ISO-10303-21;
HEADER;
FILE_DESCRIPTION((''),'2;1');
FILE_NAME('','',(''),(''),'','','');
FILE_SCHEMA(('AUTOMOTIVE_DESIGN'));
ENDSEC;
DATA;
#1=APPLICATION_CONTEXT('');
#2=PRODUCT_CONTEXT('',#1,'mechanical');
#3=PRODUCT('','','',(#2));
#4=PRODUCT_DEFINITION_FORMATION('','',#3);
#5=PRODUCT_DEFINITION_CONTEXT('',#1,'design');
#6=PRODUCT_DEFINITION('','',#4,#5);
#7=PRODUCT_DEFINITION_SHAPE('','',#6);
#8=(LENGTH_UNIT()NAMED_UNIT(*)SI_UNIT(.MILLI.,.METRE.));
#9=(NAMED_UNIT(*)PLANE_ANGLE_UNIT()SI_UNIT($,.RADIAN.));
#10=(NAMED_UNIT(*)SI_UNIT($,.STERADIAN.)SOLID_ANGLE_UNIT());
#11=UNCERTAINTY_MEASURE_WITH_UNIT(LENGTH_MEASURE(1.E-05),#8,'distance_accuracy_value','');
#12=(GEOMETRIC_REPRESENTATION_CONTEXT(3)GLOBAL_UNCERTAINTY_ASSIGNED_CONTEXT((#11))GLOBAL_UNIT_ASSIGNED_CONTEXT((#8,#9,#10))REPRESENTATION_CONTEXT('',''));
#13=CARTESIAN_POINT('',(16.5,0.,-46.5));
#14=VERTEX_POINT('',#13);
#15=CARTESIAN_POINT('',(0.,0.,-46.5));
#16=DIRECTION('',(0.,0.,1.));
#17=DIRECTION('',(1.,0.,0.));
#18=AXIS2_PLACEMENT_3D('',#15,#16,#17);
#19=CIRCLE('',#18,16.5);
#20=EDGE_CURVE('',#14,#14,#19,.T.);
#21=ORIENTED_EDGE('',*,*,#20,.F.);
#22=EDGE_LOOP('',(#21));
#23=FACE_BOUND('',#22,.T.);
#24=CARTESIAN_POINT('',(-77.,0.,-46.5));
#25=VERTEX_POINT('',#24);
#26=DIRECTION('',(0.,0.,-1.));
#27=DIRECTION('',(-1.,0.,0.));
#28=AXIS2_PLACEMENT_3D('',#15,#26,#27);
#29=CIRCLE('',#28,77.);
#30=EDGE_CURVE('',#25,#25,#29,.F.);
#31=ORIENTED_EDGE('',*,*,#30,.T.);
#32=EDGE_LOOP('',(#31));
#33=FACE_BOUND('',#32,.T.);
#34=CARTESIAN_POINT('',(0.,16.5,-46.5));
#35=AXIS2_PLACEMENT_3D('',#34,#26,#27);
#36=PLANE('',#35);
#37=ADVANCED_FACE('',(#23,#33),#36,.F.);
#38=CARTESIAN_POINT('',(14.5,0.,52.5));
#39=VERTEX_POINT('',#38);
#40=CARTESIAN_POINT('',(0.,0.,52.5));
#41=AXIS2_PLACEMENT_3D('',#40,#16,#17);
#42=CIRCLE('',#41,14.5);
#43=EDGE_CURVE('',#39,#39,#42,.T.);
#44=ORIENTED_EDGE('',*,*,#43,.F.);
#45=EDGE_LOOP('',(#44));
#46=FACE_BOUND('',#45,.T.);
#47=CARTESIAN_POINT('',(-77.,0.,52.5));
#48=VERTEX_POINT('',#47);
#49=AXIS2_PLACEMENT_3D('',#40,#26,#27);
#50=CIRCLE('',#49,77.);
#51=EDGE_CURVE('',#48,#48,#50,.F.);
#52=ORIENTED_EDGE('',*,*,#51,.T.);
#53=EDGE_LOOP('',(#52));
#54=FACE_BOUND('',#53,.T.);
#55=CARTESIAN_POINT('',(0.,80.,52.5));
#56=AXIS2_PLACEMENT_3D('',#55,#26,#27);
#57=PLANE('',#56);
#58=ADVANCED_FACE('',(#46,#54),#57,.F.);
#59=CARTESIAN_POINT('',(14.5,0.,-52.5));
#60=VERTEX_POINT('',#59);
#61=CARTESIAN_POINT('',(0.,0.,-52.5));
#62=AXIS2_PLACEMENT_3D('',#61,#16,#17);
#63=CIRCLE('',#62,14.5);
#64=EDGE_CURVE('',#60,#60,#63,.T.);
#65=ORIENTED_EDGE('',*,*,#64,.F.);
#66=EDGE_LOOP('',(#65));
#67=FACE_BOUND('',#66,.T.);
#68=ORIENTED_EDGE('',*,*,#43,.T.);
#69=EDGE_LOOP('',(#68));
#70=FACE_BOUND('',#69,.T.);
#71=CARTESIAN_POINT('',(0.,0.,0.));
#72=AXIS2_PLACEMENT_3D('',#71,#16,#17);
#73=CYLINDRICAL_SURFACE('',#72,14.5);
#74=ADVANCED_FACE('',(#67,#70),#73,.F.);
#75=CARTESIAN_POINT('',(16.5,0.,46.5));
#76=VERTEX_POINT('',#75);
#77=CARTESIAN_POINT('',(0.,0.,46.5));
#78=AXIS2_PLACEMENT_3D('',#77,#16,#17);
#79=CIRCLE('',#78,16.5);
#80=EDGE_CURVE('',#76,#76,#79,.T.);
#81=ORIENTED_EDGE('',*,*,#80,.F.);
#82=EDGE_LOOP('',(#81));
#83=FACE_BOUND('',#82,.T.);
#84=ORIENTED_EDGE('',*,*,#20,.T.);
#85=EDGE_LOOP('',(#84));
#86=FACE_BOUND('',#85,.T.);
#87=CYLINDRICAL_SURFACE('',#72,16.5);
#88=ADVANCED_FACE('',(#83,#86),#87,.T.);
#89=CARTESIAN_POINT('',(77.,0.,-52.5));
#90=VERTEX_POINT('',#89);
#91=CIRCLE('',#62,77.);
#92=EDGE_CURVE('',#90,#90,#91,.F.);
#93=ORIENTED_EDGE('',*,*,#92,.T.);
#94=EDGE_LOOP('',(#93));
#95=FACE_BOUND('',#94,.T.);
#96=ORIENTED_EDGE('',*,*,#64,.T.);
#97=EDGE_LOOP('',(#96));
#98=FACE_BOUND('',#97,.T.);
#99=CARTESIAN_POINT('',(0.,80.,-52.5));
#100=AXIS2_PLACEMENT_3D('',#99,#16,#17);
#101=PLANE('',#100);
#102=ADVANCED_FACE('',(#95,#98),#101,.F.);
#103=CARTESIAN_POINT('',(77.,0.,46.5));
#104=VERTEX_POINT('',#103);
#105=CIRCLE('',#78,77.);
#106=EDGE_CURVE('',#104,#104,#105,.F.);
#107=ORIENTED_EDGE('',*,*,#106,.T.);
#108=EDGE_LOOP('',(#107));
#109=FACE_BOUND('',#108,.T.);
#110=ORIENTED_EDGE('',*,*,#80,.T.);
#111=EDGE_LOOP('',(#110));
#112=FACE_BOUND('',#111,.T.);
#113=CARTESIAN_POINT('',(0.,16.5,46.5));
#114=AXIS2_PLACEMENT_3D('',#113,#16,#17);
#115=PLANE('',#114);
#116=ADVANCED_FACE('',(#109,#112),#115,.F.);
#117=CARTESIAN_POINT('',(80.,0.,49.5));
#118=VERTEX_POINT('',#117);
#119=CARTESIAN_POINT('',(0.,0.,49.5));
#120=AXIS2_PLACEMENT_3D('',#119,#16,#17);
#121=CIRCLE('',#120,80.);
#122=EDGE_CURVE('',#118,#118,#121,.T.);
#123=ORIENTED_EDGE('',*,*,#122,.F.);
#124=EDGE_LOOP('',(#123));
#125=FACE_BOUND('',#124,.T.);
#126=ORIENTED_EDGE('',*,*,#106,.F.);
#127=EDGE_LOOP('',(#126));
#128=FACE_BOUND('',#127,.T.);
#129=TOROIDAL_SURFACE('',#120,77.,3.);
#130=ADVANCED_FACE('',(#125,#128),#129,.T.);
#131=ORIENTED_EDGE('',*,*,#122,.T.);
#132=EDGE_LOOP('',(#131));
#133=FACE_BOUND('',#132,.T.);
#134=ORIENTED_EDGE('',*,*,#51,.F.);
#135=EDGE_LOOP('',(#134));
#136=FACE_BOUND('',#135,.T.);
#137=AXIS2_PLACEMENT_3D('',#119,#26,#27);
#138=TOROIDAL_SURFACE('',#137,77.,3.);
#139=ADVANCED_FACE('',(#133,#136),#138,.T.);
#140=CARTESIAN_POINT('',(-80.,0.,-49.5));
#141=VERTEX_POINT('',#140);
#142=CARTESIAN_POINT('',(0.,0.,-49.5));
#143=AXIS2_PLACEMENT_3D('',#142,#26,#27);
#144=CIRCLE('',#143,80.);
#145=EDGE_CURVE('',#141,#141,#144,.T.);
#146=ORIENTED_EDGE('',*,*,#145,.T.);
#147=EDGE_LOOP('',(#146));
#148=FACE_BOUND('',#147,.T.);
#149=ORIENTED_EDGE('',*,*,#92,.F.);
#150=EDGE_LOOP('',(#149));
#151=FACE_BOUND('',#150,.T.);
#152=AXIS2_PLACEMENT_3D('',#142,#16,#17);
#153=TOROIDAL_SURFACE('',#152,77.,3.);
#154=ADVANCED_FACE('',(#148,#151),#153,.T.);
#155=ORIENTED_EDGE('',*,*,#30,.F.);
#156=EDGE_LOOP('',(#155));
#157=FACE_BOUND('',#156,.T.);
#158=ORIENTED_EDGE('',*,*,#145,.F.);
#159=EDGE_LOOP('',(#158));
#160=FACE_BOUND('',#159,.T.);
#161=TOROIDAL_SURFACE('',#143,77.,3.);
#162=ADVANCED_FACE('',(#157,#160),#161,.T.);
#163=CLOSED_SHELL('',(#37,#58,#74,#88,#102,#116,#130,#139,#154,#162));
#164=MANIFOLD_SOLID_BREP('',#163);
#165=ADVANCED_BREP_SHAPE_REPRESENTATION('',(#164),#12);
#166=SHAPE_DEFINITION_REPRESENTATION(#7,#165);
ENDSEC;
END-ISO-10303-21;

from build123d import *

# Parameters (mm, degrees)
FILLET1_R = 3


with BuildPart() as part:
    # Sketch1 → Revolve1 (revolve)
    with BuildSketch(Plane(origin=(0, 0, 0), x_dir=(0, 0, -1), z_dir=(1, 0, 0)), mode=Mode.PRIVATE) as revolve1_sk:
        Polygon((-52.5, 80), (-52.5, 14.5), (52.5, 14.5), (52.5, 80), (46.5, 80), (46.5, 16.5), (-46.5, 16.5), (-46.5, 80), align=None)
    revolve(revolve1_sk.sketch.rotate(Axis((0, 0, 0), (0, 0, -1)), 90), axis=Axis((0, 0, 0), (0, 0, -1)))

    # Fillet1
    fillet1_edges = [part.edges().sort_by_distance(p)[0] for p in [
        (-80, 0, 46.5),
        (-80, 0, -46.5),
        (-80, 0, -52.5),
        (-80, 0, 52.5),
    ]]
    fillet(fillet1_edges, radius=FILLET1_R - 0.0001)  # a hair under: the kernel refuses the full size


solid = part.part
